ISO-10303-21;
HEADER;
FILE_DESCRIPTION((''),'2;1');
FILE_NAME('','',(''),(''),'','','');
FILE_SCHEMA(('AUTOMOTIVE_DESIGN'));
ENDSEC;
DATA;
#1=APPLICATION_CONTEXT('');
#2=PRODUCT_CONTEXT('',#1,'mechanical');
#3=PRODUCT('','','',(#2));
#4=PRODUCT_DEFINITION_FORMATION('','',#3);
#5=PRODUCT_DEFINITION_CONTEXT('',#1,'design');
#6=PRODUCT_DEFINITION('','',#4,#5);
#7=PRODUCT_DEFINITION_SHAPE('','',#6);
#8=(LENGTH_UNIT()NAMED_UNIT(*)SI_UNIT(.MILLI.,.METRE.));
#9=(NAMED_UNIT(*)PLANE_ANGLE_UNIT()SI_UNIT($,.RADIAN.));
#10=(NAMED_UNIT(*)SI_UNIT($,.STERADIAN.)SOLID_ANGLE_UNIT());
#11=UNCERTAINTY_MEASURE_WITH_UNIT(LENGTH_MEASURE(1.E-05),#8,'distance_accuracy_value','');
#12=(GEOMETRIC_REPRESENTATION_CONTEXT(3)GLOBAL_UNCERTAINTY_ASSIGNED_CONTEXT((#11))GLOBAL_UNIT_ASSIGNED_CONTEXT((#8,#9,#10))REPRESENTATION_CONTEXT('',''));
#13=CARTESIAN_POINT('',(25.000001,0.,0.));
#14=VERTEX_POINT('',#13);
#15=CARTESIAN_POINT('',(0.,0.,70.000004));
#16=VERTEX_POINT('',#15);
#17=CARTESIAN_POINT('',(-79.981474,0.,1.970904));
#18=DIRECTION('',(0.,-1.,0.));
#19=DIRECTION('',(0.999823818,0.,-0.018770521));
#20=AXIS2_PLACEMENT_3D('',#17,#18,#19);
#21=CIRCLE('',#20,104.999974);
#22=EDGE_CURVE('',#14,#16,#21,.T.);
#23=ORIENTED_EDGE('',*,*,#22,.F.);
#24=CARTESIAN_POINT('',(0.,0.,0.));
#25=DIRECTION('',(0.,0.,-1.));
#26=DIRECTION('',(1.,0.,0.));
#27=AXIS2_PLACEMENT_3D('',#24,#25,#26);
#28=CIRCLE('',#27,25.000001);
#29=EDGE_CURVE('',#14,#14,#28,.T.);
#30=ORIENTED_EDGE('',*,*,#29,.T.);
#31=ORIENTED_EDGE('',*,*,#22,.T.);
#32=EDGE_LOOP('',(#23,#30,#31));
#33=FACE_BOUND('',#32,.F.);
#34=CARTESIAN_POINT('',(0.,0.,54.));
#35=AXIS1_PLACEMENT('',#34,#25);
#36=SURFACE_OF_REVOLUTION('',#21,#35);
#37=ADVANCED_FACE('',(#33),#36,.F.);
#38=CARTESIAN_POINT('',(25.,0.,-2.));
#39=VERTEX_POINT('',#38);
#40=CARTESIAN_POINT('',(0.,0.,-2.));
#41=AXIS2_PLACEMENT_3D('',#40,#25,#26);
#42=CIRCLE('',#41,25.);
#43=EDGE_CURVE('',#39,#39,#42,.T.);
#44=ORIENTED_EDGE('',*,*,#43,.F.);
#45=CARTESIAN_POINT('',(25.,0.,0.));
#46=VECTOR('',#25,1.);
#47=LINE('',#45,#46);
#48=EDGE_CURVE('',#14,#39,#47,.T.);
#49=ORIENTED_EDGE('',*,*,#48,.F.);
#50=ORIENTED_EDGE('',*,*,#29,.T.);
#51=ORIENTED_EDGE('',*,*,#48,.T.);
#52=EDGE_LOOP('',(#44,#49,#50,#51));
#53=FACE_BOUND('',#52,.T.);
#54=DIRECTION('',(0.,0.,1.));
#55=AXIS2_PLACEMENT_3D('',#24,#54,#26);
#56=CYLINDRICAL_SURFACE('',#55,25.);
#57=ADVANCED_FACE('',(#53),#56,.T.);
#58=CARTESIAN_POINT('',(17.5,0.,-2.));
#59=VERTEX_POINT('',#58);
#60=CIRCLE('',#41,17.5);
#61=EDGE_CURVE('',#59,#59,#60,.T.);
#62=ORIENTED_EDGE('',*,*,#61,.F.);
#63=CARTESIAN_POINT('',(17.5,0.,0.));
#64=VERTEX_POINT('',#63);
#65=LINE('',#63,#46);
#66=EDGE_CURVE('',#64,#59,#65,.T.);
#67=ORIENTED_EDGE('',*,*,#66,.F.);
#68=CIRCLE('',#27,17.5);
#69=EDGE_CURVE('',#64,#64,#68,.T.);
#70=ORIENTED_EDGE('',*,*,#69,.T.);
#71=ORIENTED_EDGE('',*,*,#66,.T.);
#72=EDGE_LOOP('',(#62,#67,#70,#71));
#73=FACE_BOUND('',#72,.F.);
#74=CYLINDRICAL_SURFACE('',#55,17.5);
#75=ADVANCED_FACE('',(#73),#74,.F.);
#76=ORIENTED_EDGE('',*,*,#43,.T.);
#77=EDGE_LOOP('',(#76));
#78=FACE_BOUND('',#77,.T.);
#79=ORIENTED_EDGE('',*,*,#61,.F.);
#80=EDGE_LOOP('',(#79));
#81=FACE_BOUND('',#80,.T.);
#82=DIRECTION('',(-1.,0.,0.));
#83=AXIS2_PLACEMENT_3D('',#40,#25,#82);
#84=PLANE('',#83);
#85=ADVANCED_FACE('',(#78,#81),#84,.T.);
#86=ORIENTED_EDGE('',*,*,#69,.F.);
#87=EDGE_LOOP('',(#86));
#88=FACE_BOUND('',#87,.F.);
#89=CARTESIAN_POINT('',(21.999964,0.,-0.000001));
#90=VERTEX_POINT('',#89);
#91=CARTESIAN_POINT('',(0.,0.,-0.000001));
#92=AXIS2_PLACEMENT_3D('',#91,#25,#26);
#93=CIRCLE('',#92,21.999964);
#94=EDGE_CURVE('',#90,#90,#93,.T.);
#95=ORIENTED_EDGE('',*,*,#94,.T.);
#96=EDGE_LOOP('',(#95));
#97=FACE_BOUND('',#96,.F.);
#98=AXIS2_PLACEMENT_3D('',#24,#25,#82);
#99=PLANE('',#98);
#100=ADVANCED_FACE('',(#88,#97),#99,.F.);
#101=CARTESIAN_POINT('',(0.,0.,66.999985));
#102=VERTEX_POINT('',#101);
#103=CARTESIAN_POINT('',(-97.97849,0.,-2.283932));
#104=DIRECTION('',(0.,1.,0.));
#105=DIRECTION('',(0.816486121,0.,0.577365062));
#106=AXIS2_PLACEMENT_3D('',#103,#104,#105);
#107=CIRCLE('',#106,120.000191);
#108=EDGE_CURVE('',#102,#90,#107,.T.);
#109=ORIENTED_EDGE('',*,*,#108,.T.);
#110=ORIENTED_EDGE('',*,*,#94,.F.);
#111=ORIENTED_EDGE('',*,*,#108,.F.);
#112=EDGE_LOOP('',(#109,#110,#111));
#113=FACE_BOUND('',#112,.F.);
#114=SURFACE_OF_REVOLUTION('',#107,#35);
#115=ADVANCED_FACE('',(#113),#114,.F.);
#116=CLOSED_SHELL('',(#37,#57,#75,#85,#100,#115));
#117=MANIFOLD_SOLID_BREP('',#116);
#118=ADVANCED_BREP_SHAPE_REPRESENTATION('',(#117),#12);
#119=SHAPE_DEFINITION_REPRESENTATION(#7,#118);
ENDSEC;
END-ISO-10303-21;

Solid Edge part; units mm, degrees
sketch "Sketch1" plane through (0, 0, 0) normal (0, -1, 0) x (1, 0, 0)
  arc A0 (25, 0) -> (0, 70) centre (-79.9815, 1.9709) ccw
  line L0 (0, 67) -> (0, 70)
  arc A1 (0, 67) -> (22, 0) centre (-97.9783, -2.2839) cw
  line L1 (22, 0) -> (25, 0)
  dimension "D1" = 3
  dimension "D2" = 70
  dimension "D3" = 105
  dimension "D4" = 25
  dimension "D5" = 120
revolve "RevolvedProtrusion1" add sketch "Sketch1" angle 360 about axis through (0, 0, 54) along (0, 0, -1)
sketch "Sketch2" plane through (0, 0, 0) normal (0, 0, -1) x (1, 0, 0)
  circle A0 centre (0, 0) radius 25
  circle A1 centre (0, 0) radius 17.5
  dimension "D1" = 35
extrude "Protrusion1" add sketch "Sketch2" along normal blind 2
properties material "PVC"
